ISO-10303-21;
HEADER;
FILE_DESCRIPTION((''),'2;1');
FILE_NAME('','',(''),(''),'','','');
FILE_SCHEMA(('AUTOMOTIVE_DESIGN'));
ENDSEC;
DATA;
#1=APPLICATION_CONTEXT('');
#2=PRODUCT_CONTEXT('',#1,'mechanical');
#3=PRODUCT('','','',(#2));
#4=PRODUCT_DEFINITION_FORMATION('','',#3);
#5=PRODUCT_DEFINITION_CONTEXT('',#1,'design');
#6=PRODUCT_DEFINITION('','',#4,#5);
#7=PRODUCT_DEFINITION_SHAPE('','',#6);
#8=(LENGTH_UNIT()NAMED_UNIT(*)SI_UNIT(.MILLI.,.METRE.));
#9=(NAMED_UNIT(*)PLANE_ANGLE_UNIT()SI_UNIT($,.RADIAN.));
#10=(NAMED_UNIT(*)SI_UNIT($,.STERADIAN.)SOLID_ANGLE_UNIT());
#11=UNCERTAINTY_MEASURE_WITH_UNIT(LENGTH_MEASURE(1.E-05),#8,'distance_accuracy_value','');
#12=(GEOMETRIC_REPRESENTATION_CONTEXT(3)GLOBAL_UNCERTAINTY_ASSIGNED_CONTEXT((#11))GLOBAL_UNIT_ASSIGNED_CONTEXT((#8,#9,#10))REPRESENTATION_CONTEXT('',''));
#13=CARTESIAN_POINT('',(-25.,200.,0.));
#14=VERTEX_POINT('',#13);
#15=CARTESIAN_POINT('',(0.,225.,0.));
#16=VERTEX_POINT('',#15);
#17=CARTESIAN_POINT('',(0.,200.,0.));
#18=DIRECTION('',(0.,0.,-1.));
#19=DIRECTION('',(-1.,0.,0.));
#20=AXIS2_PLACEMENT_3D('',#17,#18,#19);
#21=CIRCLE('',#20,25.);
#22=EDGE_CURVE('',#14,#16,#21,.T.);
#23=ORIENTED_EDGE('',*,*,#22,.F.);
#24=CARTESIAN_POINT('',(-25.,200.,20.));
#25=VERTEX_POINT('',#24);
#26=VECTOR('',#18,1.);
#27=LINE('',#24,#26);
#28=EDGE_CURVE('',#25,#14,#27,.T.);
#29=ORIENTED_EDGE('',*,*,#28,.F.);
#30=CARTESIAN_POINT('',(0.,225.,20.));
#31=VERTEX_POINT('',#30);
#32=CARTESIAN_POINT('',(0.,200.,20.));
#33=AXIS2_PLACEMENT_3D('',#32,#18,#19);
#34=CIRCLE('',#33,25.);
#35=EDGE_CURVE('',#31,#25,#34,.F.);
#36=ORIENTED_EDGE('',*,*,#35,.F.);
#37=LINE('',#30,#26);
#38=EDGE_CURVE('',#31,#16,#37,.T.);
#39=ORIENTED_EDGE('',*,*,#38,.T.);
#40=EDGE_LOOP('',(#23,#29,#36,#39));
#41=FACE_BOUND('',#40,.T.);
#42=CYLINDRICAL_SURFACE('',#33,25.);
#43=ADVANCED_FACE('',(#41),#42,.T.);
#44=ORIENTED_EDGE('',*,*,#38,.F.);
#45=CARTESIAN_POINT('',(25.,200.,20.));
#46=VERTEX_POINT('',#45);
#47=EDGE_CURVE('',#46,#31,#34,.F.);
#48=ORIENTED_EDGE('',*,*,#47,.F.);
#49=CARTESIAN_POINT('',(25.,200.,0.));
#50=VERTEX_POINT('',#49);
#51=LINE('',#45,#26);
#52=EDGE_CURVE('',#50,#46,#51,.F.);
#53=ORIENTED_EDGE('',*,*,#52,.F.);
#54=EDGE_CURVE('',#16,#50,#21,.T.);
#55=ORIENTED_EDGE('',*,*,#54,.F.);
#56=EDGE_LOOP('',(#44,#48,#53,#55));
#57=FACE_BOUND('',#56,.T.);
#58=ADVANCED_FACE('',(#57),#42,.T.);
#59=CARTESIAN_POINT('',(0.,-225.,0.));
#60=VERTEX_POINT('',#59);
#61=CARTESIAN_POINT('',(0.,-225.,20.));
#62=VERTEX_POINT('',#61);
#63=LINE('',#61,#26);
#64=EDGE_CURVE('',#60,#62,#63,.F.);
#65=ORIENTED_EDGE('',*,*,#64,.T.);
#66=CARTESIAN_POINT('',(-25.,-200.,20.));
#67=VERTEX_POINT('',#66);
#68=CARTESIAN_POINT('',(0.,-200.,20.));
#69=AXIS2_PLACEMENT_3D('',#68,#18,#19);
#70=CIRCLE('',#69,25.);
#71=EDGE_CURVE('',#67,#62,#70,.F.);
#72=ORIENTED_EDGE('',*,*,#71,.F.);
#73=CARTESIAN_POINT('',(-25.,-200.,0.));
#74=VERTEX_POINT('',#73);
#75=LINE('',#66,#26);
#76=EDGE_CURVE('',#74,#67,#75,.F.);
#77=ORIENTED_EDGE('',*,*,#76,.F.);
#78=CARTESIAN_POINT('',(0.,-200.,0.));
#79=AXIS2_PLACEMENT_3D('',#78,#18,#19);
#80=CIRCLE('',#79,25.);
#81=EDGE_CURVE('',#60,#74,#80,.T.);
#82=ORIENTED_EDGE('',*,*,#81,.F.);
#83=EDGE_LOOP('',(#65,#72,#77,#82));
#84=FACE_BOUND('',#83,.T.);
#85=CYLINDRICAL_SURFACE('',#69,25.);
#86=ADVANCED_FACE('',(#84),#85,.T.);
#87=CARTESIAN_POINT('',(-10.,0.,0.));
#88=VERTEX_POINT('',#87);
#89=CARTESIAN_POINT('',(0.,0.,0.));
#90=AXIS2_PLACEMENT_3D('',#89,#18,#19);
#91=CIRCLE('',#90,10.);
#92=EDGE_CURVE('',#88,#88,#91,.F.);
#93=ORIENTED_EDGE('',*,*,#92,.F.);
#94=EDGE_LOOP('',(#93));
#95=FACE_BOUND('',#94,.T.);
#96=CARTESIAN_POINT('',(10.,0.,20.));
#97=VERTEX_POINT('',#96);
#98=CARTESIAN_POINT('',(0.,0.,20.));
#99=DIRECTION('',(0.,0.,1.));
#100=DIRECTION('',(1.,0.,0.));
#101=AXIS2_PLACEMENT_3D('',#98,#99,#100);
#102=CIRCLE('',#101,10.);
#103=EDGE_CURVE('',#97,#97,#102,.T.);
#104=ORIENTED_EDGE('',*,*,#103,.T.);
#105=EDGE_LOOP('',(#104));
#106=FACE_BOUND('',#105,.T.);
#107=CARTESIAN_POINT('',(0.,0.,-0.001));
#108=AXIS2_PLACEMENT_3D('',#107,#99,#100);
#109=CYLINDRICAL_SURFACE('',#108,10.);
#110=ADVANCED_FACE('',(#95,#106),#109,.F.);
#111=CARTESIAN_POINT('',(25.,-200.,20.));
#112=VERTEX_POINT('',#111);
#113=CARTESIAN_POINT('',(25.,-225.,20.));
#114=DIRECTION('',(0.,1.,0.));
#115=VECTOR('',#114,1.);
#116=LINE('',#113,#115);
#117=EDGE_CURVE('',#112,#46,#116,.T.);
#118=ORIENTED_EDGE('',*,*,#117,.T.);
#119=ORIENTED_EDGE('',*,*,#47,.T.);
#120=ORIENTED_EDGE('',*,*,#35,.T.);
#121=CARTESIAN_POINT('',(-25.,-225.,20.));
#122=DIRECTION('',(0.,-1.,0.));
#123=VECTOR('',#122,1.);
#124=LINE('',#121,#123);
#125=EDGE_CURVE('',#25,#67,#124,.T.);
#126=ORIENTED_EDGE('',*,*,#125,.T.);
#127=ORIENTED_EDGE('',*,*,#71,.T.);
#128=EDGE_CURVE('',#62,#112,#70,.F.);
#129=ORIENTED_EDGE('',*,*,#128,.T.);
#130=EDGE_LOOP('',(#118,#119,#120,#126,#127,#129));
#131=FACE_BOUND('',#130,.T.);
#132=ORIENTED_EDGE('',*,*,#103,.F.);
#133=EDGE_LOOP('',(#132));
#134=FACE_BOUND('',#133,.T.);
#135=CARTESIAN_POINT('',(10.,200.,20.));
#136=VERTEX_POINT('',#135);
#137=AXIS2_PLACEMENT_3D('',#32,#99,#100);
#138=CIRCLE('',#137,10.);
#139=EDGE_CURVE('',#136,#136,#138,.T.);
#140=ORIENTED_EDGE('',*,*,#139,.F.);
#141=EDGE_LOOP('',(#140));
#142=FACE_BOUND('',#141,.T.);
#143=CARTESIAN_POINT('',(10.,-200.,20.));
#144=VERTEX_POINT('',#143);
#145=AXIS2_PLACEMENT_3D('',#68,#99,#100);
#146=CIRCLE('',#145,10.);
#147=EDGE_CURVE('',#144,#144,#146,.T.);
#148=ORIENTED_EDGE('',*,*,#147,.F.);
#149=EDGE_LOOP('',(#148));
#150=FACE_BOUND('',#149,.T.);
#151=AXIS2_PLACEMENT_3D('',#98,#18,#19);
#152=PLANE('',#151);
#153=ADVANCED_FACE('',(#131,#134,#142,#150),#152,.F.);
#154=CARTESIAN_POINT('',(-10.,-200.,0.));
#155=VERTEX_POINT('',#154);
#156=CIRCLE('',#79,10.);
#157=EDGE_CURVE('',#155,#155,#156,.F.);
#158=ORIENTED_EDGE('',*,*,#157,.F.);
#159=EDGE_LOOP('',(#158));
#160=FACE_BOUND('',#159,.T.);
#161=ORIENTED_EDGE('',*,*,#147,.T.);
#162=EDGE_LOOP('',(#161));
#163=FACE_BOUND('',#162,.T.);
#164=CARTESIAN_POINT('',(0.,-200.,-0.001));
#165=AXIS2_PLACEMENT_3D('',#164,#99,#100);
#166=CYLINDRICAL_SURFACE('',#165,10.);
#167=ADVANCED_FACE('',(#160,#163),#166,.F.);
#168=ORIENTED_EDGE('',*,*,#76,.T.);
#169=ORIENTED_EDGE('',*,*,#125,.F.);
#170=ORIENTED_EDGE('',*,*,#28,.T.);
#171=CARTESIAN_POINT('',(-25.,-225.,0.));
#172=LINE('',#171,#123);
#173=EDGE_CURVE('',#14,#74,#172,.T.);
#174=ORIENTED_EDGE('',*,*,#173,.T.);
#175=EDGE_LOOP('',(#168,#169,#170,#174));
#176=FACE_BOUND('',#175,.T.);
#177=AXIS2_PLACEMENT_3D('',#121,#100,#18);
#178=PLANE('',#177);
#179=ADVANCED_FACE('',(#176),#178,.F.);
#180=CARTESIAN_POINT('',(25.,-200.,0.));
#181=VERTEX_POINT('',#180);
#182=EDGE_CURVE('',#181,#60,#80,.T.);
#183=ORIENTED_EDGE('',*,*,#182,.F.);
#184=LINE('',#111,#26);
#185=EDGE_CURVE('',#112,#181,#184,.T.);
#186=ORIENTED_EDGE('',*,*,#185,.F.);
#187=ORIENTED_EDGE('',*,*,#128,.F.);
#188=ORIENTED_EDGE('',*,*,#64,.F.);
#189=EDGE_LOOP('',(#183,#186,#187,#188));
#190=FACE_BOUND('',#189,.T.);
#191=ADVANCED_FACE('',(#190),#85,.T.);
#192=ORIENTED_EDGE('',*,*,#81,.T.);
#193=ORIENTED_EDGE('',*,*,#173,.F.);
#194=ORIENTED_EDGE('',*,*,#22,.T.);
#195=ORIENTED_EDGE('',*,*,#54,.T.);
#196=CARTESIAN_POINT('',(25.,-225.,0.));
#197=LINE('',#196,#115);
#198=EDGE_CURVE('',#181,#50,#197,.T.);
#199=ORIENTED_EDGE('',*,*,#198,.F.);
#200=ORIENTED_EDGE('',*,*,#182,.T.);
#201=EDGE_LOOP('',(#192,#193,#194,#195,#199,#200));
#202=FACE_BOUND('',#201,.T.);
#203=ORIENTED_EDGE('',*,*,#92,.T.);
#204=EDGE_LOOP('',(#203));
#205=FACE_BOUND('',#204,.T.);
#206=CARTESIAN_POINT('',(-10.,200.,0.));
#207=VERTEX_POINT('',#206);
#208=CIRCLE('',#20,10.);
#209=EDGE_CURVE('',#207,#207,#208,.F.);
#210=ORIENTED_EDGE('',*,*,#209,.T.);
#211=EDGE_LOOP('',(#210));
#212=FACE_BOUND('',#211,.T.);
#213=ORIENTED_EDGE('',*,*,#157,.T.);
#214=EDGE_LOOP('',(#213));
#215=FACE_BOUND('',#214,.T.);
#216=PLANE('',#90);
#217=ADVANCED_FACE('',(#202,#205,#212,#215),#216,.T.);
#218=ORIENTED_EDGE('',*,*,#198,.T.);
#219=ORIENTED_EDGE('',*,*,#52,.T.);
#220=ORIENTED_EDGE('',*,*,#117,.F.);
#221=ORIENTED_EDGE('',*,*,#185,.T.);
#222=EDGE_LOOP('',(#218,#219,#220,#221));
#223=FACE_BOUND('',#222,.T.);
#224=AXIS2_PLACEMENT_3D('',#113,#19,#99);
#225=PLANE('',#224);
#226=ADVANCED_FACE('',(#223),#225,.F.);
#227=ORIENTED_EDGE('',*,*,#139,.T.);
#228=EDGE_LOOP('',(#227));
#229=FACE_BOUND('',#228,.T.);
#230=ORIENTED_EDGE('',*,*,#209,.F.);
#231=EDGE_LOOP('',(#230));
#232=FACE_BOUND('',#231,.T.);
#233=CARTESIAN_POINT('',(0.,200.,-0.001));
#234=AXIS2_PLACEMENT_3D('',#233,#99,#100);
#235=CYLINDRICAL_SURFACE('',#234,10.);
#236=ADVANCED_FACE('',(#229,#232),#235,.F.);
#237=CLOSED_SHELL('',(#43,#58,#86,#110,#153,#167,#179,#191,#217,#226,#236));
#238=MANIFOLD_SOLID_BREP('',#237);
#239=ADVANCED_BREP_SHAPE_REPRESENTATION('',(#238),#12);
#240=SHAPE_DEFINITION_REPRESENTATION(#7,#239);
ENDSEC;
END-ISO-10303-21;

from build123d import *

# Parameters (mm, degrees)
ESQUISSE1_W             = 50
ESQUISSE1_H             = 450
BOSS_EXTRU_1_DEPTH      = 20
ENL_V_MAT_EXTRU_1_REACH = 229.266
ESQUISSE2_R             = 10
CONG_1_R                = 25


with BuildPart() as part:
    # Esquisse1 → Boss.-Extru.1 (new body)
    with BuildSketch(Plane.XY):
        Rectangle(ESQUISSE1_W, ESQUISSE1_H)
    extrude(amount=BOSS_EXTRU_1_DEPTH)

    # Esquisse2 → Enlèv. mat.-Extru.1 (cut, up to next)
    with BuildSketch(Plane.XY.offset(20), mode=Mode.PRIVATE) as enl_v_mat_extru_1_sk1:
        with Locations((0, -200)):
            Circle(ESQUISSE2_R)
    enl_v_mat_extru_1_tool1 = extrude(enl_v_mat_extru_1_sk1.sketch, amount=-ENL_V_MAT_EXTRU_1_REACH, mode=Mode.PRIVATE) & part.part
    # Esquisse2 → Enlèv. mat.-Extru.1 (cut, up to next)
    with BuildSketch(Plane.XY.offset(20), mode=Mode.PRIVATE) as enl_v_mat_extru_1_sk2:
        with Locations((0, 200)):
            Circle(ESQUISSE2_R)
    enl_v_mat_extru_1_tool2 = extrude(enl_v_mat_extru_1_sk2.sketch, amount=-ENL_V_MAT_EXTRU_1_REACH, mode=Mode.PRIVATE) & part.part
    # Esquisse2 → Enlèv. mat.-Extru.1 (cut, up to next)
    with BuildSketch(Plane.XY.offset(20), mode=Mode.PRIVATE) as enl_v_mat_extru_1_sk3:
        Circle(ESQUISSE2_R)
    enl_v_mat_extru_1_tool3 = extrude(enl_v_mat_extru_1_sk3.sketch, amount=-ENL_V_MAT_EXTRU_1_REACH, mode=Mode.PRIVATE) & part.part
    add(enl_v_mat_extru_1_tool1.solids().sort_by_distance((0, -200, 20))[0], mode=Mode.SUBTRACT)
    add(enl_v_mat_extru_1_tool2.solids().sort_by_distance((0, 200, 20))[0], mode=Mode.SUBTRACT)
    add(enl_v_mat_extru_1_tool3.solids().sort_by_distance((0, 0, 20))[0], mode=Mode.SUBTRACT)

    # Congé1
    cong_1_edges = [part.edges().sort_by_distance(p)[0] for p in [
        (-25, -225, 10),
        (25, -225, 10),
        (-25, 225, 10),
        (25, 225, 10),
    ]]
    fillet(cong_1_edges, radius=CONG_1_R - 0.0001)  # a hair under: the kernel refuses the full size


solid = part.part
